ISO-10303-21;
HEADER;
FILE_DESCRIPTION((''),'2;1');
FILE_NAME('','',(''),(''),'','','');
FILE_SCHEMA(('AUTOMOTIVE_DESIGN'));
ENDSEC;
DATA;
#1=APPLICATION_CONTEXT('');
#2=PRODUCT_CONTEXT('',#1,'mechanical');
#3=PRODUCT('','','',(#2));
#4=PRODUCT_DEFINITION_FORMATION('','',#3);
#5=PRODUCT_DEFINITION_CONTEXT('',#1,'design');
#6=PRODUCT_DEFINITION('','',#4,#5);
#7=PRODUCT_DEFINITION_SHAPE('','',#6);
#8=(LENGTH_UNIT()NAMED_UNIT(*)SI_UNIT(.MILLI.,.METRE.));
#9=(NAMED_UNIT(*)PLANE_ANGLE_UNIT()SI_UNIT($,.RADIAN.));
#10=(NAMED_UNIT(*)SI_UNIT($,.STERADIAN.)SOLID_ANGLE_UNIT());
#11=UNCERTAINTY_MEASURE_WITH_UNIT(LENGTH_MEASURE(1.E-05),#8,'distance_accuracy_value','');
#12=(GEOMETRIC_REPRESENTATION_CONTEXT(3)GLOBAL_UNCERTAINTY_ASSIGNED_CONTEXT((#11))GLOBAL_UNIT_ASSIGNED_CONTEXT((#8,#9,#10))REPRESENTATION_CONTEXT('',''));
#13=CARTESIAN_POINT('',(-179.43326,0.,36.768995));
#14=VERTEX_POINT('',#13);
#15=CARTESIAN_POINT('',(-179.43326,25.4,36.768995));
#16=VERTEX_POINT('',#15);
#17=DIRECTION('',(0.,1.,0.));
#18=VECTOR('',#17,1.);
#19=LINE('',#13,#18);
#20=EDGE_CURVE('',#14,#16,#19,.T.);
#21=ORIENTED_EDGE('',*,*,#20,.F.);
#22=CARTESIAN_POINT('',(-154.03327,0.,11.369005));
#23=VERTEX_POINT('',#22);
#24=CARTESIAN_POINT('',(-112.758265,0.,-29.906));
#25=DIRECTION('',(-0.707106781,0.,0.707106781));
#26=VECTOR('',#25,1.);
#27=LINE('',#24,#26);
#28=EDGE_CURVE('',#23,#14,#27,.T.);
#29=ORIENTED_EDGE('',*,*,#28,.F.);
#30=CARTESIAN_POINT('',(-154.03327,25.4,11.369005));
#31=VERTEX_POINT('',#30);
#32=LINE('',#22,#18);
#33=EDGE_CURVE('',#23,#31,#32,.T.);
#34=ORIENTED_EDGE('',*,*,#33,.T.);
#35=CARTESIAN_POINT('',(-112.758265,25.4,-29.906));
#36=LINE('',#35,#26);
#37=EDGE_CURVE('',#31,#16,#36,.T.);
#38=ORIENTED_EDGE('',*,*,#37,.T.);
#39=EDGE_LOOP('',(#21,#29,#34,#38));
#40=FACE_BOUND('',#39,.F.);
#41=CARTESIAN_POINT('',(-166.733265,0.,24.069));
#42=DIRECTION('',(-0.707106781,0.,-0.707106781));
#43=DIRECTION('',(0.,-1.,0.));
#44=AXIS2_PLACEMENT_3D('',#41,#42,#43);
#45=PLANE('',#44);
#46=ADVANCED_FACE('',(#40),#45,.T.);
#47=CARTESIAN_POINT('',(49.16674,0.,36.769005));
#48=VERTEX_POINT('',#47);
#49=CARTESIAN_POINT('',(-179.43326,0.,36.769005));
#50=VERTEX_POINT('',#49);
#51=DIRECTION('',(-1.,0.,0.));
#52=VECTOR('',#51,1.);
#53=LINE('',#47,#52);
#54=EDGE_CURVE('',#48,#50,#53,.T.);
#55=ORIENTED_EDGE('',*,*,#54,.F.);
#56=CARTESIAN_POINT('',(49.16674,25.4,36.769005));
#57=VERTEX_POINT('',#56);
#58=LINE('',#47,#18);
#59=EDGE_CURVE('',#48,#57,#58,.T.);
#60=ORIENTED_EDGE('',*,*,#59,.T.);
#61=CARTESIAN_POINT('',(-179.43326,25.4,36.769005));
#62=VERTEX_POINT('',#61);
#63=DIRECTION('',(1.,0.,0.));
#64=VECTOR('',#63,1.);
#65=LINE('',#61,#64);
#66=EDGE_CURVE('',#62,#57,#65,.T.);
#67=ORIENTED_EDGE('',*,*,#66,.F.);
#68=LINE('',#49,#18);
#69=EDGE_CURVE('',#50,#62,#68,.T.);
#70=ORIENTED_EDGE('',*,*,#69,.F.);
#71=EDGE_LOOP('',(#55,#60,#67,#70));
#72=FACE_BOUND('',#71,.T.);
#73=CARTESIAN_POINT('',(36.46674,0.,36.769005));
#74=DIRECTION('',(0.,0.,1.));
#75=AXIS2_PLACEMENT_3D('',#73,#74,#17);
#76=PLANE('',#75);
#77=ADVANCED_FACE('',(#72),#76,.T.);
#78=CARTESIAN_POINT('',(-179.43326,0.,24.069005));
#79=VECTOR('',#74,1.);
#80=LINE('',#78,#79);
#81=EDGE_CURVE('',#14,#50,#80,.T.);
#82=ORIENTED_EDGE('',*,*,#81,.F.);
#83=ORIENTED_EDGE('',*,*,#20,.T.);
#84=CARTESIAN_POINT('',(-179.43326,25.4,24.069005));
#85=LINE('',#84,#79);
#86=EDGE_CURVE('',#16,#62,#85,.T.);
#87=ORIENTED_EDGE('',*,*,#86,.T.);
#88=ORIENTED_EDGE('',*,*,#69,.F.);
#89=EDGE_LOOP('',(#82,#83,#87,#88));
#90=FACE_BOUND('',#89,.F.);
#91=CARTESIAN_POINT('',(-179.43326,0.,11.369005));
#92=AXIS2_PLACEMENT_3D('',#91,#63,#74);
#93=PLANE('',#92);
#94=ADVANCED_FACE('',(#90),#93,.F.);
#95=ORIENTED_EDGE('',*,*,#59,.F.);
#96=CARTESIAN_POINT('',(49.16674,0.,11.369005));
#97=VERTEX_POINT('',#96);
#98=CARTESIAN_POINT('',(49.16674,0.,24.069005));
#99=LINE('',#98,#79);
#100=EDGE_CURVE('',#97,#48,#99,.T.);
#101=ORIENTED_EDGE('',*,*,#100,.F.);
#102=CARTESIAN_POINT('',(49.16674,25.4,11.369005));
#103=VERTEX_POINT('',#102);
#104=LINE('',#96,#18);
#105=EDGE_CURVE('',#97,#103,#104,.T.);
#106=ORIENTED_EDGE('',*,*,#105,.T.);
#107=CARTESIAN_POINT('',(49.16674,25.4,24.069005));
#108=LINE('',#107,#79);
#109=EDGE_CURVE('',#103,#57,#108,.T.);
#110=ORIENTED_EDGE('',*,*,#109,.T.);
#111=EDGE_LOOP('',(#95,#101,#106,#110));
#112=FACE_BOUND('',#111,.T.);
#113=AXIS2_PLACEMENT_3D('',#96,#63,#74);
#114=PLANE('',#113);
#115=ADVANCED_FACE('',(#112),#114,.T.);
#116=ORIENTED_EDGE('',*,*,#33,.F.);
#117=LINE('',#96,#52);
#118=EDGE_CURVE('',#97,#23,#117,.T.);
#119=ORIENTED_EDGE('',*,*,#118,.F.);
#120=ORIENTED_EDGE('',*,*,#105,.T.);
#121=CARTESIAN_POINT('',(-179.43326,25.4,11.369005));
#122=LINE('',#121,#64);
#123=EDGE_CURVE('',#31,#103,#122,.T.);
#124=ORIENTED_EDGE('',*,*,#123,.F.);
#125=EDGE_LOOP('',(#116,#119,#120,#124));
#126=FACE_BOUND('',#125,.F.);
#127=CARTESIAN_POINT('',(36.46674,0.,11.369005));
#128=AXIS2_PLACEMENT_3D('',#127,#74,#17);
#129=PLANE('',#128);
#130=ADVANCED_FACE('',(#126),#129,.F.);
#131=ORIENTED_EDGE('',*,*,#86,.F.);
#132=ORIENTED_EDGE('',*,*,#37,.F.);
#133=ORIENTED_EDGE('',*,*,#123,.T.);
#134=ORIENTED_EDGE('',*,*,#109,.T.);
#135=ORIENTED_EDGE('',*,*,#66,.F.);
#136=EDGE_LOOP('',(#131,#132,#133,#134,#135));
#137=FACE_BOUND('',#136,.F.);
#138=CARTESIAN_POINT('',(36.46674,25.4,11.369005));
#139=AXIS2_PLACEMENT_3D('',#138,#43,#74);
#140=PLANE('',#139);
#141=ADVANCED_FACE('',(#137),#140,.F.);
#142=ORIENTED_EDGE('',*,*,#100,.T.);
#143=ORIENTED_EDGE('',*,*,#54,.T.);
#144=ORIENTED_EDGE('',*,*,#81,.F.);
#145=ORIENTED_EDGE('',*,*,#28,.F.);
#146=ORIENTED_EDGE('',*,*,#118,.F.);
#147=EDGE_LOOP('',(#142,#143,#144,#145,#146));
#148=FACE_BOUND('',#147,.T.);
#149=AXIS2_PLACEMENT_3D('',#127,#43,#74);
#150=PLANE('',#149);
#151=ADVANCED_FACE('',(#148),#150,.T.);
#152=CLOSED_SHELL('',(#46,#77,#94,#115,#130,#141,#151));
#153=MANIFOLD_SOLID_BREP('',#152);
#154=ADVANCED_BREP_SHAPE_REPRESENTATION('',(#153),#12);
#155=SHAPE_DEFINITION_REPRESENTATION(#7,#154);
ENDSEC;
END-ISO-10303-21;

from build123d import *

# Parameters (mm, degrees)
F0_W     = 215.9
F0_H     = 25.4
F1_DEPTH = 25.4
F2_DEPTH = 12.7
F3_SIZE2 = 25.39999
F3_SIZE  = 25.39999


# Not quite as in the source:
# - a fillet or chamfer is up to 0.001 mm smaller than in the source, because OpenCascade refuses the exact size


with BuildPart() as f1:
    # F0 (on Front) → F1 (new body)
    with BuildSketch(Plane.XZ):
        with Locations((-71.4832603614, 24.0690046921)):
            Rectangle(F0_W, F0_H)
    extrude(amount=-F1_DEPTH)

    # F2 (add): a face of the model
    f2_faces = [f1.faces().sort_by_distance(p)[0] for p in [
        (36.4667396386, 12.7, 24.0690046921),
    ]]
    extrude(f2_faces, amount=F2_DEPTH)

    # F3 (size 25.4 and 25.4 in the source; OpenCascade refuses exactly that, so slightly less here)
    f3_edges = [f1.edges().sort_by_distance(p)[0] for p in [
        (-179.43326, 12.7, 11.369005),
    ]]
    chamfer(f3_edges, length=F3_SIZE, length2=F3_SIZE2)


solid = f1.part
